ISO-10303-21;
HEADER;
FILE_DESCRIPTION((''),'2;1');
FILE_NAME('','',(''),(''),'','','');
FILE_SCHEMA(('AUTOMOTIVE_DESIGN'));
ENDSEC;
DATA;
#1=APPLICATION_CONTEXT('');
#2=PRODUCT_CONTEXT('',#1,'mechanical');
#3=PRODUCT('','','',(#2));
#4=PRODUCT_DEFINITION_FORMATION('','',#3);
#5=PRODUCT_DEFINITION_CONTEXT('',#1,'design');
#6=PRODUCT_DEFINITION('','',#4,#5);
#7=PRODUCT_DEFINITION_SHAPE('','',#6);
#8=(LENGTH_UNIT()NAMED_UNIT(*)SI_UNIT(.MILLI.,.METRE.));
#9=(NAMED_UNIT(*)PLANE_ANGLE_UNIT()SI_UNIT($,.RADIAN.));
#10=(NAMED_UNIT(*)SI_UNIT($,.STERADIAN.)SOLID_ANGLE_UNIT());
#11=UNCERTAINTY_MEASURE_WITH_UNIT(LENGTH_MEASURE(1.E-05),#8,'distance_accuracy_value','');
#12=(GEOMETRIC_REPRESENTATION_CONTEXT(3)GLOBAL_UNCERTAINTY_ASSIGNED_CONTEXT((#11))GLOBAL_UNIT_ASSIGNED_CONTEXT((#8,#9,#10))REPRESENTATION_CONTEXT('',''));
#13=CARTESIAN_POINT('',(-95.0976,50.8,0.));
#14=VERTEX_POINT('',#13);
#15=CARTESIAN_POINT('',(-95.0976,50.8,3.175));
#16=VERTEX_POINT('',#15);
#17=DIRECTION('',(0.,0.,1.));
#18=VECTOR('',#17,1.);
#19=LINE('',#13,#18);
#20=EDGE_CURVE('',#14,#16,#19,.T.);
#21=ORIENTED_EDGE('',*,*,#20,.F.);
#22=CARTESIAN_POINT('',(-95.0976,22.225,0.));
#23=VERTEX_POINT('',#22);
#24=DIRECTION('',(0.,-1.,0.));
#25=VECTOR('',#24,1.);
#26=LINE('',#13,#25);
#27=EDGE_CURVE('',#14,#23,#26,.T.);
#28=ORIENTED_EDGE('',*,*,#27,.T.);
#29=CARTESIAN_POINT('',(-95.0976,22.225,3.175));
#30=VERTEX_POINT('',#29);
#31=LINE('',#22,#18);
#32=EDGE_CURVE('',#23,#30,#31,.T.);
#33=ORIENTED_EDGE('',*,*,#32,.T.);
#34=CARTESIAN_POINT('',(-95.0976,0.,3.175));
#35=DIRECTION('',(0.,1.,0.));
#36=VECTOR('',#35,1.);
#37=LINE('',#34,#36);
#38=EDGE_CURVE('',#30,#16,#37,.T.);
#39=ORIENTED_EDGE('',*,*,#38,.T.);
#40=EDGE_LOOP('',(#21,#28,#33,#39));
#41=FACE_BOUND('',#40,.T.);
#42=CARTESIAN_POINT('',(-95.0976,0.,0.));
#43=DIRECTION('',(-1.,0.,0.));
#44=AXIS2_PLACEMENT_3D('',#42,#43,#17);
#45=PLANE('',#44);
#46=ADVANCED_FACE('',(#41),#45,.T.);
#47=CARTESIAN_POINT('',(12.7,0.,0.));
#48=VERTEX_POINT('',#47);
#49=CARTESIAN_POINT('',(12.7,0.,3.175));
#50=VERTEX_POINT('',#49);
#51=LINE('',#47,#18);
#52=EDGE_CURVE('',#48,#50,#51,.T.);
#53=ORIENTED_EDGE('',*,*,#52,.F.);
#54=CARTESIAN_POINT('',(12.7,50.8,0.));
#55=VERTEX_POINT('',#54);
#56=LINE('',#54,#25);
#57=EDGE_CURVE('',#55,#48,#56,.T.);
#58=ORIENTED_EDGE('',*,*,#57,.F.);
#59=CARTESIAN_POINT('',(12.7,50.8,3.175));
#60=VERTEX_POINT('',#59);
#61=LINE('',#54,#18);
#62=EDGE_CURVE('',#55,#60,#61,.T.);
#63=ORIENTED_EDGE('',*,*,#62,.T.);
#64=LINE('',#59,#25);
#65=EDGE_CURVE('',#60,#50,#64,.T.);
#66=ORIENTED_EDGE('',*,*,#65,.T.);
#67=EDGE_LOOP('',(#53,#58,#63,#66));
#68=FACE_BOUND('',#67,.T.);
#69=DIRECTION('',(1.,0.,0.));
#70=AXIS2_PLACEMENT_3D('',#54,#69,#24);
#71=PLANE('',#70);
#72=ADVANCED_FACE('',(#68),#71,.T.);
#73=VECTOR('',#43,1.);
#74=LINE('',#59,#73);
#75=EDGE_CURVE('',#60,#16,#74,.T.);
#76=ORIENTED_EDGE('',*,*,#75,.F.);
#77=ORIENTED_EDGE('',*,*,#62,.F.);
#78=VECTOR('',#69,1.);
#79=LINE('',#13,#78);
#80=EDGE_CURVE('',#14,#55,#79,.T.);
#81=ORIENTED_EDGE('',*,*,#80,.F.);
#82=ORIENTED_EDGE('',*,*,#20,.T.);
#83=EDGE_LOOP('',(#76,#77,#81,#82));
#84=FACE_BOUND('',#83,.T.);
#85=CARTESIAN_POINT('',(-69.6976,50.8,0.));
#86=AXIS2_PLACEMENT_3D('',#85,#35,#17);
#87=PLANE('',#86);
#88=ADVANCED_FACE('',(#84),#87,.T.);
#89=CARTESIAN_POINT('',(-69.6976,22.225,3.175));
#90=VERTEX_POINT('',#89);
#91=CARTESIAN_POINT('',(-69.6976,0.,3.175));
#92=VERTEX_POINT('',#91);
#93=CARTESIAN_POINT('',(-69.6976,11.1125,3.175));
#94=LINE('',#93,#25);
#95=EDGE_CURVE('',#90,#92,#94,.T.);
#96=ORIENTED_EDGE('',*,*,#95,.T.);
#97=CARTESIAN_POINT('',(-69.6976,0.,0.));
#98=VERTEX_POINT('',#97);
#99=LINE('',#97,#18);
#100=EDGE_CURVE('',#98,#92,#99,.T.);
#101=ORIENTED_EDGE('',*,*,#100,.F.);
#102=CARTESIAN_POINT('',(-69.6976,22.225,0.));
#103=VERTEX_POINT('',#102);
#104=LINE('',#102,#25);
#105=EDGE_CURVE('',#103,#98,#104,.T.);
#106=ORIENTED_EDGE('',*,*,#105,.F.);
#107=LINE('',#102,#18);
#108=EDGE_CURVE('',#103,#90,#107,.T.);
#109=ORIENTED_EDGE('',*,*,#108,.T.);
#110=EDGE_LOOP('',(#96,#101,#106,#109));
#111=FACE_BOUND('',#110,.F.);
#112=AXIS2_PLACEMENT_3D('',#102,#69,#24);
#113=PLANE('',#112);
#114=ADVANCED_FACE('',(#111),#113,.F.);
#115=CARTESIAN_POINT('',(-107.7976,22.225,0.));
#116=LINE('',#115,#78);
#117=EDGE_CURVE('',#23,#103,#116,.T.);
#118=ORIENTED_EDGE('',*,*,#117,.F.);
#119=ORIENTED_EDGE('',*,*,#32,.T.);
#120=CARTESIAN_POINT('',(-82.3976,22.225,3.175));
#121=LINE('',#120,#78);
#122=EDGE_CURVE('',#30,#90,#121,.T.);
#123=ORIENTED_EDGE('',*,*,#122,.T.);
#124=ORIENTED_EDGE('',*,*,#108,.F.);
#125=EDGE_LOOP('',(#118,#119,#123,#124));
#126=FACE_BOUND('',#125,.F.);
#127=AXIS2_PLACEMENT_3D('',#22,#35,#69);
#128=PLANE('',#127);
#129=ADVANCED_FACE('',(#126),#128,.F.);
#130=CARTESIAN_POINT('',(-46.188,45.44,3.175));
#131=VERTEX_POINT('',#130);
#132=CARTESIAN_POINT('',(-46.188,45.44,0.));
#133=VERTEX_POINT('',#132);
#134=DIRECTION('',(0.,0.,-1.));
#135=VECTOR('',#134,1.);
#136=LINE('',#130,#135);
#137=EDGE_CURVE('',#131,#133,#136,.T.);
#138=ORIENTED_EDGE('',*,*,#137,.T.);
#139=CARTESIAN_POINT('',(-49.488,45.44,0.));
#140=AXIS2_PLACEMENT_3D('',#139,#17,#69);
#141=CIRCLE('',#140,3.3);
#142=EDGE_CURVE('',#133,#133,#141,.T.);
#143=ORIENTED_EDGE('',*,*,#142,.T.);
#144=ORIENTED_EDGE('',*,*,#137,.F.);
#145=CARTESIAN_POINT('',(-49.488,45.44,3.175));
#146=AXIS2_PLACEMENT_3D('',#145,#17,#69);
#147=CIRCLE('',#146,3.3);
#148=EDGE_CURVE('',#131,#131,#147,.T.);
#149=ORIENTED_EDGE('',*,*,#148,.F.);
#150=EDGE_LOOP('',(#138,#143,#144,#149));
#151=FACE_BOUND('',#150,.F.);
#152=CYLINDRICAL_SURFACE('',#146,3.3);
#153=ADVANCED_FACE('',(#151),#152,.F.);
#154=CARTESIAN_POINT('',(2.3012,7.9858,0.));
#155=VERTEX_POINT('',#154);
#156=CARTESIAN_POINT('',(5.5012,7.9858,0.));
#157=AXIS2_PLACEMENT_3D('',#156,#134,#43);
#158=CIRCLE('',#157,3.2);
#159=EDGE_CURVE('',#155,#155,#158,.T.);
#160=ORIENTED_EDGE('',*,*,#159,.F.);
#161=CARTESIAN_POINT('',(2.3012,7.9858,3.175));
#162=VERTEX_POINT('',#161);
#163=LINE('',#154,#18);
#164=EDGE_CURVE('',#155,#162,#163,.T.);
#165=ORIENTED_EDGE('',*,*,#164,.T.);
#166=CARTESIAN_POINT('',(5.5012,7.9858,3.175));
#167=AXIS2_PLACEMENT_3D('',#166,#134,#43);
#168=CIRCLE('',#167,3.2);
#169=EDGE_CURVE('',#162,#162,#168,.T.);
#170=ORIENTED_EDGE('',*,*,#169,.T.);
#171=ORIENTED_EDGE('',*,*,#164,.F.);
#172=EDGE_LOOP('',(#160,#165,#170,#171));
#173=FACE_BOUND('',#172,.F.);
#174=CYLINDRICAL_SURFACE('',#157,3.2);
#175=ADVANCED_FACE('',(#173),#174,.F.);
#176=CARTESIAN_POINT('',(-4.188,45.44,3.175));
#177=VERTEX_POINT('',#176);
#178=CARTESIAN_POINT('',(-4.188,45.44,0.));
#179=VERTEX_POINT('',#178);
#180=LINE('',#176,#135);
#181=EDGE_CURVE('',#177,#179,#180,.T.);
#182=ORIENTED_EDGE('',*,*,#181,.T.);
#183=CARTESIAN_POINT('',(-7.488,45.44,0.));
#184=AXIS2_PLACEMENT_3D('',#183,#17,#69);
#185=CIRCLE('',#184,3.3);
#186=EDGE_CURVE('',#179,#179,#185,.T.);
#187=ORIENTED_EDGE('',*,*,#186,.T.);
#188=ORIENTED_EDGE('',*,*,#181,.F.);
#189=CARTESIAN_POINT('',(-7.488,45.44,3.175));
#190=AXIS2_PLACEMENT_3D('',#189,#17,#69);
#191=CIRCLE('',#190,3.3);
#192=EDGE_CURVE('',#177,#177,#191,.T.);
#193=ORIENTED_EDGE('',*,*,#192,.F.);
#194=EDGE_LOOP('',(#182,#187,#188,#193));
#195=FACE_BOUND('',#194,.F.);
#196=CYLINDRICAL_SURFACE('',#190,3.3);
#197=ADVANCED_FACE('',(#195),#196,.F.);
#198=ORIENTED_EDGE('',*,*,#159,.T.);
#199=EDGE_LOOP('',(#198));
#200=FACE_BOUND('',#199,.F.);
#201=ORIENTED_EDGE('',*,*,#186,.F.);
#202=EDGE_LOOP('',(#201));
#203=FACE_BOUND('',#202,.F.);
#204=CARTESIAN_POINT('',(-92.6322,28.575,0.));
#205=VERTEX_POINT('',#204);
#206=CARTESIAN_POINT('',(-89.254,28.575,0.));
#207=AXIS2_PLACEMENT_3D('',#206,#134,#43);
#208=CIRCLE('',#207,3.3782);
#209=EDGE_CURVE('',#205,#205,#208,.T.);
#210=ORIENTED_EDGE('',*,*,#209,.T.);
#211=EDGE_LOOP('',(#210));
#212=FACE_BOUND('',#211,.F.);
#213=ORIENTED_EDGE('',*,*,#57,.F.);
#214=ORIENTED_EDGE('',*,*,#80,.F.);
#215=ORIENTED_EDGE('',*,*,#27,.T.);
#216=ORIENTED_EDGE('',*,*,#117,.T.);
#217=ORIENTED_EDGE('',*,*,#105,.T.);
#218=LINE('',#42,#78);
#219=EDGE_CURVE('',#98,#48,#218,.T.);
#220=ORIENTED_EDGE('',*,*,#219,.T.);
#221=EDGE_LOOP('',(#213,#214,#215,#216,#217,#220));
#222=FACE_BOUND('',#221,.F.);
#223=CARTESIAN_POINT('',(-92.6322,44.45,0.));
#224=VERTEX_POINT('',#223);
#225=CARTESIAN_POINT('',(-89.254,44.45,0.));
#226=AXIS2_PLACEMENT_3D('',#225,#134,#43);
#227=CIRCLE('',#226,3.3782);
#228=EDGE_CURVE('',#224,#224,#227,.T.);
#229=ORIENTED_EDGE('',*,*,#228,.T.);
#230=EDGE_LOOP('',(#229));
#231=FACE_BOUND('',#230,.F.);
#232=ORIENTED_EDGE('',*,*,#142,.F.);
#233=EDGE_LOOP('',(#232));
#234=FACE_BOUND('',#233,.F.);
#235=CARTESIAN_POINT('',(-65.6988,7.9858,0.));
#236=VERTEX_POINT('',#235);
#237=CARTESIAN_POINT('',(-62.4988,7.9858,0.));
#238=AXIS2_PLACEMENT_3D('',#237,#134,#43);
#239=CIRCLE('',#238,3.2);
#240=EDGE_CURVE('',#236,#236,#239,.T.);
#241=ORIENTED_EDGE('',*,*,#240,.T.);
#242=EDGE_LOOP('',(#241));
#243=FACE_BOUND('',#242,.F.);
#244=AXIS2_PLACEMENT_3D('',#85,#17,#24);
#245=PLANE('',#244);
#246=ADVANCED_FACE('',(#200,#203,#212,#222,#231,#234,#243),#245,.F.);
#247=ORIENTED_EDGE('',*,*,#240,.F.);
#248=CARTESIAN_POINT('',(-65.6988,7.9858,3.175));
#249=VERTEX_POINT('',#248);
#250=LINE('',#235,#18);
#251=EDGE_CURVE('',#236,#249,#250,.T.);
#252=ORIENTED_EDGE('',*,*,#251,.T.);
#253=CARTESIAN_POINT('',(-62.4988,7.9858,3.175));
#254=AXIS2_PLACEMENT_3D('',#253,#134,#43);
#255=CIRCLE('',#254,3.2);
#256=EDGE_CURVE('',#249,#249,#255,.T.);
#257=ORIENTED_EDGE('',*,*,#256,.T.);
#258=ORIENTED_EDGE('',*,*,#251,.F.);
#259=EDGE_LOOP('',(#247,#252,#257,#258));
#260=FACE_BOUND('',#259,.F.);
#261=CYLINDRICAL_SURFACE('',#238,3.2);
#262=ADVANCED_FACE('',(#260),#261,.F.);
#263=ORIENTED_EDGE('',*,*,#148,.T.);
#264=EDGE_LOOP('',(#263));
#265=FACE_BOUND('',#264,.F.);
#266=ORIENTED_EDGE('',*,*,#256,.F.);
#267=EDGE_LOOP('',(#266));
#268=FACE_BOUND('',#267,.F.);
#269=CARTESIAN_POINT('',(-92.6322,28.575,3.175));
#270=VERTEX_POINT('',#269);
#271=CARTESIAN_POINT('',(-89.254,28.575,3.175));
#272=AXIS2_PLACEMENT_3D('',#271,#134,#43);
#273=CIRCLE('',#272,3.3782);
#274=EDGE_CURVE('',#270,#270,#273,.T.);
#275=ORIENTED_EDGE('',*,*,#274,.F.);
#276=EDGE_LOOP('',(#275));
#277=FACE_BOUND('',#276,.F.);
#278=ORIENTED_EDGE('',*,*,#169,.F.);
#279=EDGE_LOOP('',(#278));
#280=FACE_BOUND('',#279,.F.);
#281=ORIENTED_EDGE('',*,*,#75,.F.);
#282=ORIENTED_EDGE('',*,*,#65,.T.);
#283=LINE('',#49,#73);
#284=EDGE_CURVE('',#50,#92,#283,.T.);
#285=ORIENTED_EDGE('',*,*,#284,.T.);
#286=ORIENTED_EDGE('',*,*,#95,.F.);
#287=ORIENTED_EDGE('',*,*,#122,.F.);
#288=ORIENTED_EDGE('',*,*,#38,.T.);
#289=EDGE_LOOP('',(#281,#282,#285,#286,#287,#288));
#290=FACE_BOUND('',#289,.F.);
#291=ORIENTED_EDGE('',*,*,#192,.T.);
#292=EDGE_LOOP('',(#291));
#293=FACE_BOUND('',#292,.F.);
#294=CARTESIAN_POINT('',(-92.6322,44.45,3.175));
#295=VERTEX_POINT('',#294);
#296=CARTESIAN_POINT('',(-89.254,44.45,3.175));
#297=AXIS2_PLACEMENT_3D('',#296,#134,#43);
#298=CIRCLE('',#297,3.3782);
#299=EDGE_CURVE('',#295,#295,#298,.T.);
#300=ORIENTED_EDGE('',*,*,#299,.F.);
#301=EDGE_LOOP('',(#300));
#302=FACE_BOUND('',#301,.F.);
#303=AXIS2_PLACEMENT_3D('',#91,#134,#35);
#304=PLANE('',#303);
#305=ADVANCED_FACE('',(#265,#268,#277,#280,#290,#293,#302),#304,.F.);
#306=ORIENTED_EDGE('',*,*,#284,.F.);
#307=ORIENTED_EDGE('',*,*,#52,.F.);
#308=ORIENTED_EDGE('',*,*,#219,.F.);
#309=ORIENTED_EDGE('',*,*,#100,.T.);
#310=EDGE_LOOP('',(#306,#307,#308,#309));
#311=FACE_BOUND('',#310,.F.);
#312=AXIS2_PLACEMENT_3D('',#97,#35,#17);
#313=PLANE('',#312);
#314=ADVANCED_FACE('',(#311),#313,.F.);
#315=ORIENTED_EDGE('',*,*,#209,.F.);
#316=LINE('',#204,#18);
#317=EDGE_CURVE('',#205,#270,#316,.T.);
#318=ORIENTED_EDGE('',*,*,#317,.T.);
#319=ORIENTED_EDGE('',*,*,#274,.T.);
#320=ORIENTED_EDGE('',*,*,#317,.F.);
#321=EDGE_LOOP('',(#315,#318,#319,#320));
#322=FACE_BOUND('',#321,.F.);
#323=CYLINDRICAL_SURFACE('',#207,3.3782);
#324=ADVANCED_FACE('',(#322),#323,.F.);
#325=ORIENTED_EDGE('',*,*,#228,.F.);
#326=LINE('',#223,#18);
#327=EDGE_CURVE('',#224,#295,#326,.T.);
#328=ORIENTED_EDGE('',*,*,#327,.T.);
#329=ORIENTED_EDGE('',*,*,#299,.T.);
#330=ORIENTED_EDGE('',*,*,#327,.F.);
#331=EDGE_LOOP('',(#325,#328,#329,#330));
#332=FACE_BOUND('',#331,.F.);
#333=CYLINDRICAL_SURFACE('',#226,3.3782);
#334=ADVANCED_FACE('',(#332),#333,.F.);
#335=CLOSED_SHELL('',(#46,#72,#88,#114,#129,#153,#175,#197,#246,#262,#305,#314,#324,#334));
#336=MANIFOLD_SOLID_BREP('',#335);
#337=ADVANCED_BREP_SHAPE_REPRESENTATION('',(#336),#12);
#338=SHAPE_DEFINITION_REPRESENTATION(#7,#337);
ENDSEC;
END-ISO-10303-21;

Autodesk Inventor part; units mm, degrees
ref_plane "YZ Plane" through (0, 0, 0) normal (1, 0, 0) x (0, 1, 0)
ref_plane "XZ Plane" through (0, 0, 0) normal (0, 1, 0) x (-1, 0, 0)
ref_plane "XY Plane" through (0, 0, 0) normal (0, 0, 1) x (1, 0, 0)
sketch "Sketch1" plane through (0, 0, 0) normal (0, 0, 1) x (1, 0, 0)
  line L0 (0, 0) -> (-56.9976, 0)
  line L1 (-56.9976, 50.8) -> (0, 50.8)
  line L2 (0, 50.8) -> (-7.493, 50.8)
  line L3 (-7.493, 50.8) -> (-7.493, 44.45)
  line L4 (-56.9976, 50.8) -> (-49.5046, 50.8)
  line L5 (-49.5046, 50.8) -> (-49.5046, 44.45)
  line L6 (-56.9976, 50.8) -> (-69.6976, 50.8)
  line L7 (-69.6976, 50.8) -> (-69.6976, 0)
  line L8 (-69.6976, 0) -> (-56.9976, 0)
  line L9 (0, 50.8) -> (8.89, 50.8)
  line L10 (8.89, 0) -> (0, 0)
  line L11 (0, 50.8) -> (12.7, 50.8)
  line L12 (12.7, 50.8) -> (12.7, 0)
  line L13 (12.7, 0) -> (0, 0)
  dimension "d1" = 56.9976
  dimension "d2" = 50.8
  dimension "d3" = 7.493
  dimension "d4" = 6.35
  dimension "d5" = 7.493
  dimension "d19" = 6.35
  dimension "d48" = 12.7
  dimension "d51" = 50.8
  dimension "d57" = 12.7
extrude "Plate5" add sketch "Sketch1" along normal blind 3.175
sketch "Sketch6" plane through (0, 0, 3.175) normal (0, 0, 1) x (1, 0, 0)
  circle A0 centre (-7.488, 45.44) radius 3.3 projected
  circle A1 centre (-49.488, 45.44) radius 3.3 projected
  point P0 (0, 0)
extrude "Cut1" cut sketch "Sketch6" against normal blind 3.175
sketch "Sketch7" plane through (12.7, 0, 0) normal (1, 0, 0) x (0, 0, -1)
  line L0 (-3.175, 50.8) -> (-3.175, 0) projected
  line L1 (0, 0) -> (-3.175, 0) projected
  line L2 (0, 0) -> (0, 50.8) projected
  line L3 (0, 50.8) -> (-3.175, 50.8) projected
sketch "Sketch8" plane through (0, 0, 0) normal (0, 0, -1) x (-1, 0, 0)
  circle A0 centre (-5.5012, 7.9858) radius 3.2
  circle A1 centre (62.4988, 7.9858) radius 3.2
  point P0 (0, 0)
extrude "Cut2" cut sketch "Sketch8" against normal blind 3.175
sketch "Sketch12" plane through (-69.6976, 0, 0) normal (-1, 0, 0) x (0, 0, 1)
  line L0 (3.175, 0) -> (3.175, 50.8) projected
  line L1 (0, 50.8) -> (3.175, 50.8) projected
  line L2 (0, 50.8) -> (0, 0) projected
  line L3 (0, 0) -> (3.175, 0) projected
extrude "Extrusion3" add sketch "Sketch12" along normal blind 25.4
sketch "Sketch10" plane through (0, 0, 0) normal (0, 0, -1) x (-1, 0, 0)
  line L0 (69.6976, 0) -> (-12.7, 0) projected
  line L1 (107.7976, 22.225) -> (69.6976, 22.225)
  line L2 (69.6976, 22.225) -> (69.6976, 0)
  circle A0 centre (89.254, 44.45) radius 3.3782 projected
  circle A1 centre (89.254, 28.575) radius 3.3782 projected
  line L3 (69.6976, 0) -> (95.0976, 0)
  line L4 (95.0976, 0) -> (95.0976, 22.225)
  point P0 (0, 0)
  dimension "d67" = 38.1
  dimension "d72" = 25.4
extrude "Extrusion4" cut sketch "Sketch10" against normal blind 25.4
equation "\"d60\" = Thickness"
equation "\"d62\" = Thickness"
equation "\"BendRadius\" = Thickness"
equation "\"BendReliefWidth\" = Thickness"
equation "\"BendReliefDepth\" = 0.5 * Thickness"
equation "\"CornerReliefSize\" = 4 * Thickness"
equation "\"MinimumRemnant\" = 2 * Thickness"
equation "\"TransitionRadius\" = BendRadius"
equation "\"JacobiRadiusSize\" = BendRadius"
equation "\"GapSize\" = Thickness"
equation "\"d8\" = BendRadius"
equation "\"d56\" = BendRadius"
equation "\"Thickness\" = 3.175"
properties part number "face mount" material "Aluminum 6061"
